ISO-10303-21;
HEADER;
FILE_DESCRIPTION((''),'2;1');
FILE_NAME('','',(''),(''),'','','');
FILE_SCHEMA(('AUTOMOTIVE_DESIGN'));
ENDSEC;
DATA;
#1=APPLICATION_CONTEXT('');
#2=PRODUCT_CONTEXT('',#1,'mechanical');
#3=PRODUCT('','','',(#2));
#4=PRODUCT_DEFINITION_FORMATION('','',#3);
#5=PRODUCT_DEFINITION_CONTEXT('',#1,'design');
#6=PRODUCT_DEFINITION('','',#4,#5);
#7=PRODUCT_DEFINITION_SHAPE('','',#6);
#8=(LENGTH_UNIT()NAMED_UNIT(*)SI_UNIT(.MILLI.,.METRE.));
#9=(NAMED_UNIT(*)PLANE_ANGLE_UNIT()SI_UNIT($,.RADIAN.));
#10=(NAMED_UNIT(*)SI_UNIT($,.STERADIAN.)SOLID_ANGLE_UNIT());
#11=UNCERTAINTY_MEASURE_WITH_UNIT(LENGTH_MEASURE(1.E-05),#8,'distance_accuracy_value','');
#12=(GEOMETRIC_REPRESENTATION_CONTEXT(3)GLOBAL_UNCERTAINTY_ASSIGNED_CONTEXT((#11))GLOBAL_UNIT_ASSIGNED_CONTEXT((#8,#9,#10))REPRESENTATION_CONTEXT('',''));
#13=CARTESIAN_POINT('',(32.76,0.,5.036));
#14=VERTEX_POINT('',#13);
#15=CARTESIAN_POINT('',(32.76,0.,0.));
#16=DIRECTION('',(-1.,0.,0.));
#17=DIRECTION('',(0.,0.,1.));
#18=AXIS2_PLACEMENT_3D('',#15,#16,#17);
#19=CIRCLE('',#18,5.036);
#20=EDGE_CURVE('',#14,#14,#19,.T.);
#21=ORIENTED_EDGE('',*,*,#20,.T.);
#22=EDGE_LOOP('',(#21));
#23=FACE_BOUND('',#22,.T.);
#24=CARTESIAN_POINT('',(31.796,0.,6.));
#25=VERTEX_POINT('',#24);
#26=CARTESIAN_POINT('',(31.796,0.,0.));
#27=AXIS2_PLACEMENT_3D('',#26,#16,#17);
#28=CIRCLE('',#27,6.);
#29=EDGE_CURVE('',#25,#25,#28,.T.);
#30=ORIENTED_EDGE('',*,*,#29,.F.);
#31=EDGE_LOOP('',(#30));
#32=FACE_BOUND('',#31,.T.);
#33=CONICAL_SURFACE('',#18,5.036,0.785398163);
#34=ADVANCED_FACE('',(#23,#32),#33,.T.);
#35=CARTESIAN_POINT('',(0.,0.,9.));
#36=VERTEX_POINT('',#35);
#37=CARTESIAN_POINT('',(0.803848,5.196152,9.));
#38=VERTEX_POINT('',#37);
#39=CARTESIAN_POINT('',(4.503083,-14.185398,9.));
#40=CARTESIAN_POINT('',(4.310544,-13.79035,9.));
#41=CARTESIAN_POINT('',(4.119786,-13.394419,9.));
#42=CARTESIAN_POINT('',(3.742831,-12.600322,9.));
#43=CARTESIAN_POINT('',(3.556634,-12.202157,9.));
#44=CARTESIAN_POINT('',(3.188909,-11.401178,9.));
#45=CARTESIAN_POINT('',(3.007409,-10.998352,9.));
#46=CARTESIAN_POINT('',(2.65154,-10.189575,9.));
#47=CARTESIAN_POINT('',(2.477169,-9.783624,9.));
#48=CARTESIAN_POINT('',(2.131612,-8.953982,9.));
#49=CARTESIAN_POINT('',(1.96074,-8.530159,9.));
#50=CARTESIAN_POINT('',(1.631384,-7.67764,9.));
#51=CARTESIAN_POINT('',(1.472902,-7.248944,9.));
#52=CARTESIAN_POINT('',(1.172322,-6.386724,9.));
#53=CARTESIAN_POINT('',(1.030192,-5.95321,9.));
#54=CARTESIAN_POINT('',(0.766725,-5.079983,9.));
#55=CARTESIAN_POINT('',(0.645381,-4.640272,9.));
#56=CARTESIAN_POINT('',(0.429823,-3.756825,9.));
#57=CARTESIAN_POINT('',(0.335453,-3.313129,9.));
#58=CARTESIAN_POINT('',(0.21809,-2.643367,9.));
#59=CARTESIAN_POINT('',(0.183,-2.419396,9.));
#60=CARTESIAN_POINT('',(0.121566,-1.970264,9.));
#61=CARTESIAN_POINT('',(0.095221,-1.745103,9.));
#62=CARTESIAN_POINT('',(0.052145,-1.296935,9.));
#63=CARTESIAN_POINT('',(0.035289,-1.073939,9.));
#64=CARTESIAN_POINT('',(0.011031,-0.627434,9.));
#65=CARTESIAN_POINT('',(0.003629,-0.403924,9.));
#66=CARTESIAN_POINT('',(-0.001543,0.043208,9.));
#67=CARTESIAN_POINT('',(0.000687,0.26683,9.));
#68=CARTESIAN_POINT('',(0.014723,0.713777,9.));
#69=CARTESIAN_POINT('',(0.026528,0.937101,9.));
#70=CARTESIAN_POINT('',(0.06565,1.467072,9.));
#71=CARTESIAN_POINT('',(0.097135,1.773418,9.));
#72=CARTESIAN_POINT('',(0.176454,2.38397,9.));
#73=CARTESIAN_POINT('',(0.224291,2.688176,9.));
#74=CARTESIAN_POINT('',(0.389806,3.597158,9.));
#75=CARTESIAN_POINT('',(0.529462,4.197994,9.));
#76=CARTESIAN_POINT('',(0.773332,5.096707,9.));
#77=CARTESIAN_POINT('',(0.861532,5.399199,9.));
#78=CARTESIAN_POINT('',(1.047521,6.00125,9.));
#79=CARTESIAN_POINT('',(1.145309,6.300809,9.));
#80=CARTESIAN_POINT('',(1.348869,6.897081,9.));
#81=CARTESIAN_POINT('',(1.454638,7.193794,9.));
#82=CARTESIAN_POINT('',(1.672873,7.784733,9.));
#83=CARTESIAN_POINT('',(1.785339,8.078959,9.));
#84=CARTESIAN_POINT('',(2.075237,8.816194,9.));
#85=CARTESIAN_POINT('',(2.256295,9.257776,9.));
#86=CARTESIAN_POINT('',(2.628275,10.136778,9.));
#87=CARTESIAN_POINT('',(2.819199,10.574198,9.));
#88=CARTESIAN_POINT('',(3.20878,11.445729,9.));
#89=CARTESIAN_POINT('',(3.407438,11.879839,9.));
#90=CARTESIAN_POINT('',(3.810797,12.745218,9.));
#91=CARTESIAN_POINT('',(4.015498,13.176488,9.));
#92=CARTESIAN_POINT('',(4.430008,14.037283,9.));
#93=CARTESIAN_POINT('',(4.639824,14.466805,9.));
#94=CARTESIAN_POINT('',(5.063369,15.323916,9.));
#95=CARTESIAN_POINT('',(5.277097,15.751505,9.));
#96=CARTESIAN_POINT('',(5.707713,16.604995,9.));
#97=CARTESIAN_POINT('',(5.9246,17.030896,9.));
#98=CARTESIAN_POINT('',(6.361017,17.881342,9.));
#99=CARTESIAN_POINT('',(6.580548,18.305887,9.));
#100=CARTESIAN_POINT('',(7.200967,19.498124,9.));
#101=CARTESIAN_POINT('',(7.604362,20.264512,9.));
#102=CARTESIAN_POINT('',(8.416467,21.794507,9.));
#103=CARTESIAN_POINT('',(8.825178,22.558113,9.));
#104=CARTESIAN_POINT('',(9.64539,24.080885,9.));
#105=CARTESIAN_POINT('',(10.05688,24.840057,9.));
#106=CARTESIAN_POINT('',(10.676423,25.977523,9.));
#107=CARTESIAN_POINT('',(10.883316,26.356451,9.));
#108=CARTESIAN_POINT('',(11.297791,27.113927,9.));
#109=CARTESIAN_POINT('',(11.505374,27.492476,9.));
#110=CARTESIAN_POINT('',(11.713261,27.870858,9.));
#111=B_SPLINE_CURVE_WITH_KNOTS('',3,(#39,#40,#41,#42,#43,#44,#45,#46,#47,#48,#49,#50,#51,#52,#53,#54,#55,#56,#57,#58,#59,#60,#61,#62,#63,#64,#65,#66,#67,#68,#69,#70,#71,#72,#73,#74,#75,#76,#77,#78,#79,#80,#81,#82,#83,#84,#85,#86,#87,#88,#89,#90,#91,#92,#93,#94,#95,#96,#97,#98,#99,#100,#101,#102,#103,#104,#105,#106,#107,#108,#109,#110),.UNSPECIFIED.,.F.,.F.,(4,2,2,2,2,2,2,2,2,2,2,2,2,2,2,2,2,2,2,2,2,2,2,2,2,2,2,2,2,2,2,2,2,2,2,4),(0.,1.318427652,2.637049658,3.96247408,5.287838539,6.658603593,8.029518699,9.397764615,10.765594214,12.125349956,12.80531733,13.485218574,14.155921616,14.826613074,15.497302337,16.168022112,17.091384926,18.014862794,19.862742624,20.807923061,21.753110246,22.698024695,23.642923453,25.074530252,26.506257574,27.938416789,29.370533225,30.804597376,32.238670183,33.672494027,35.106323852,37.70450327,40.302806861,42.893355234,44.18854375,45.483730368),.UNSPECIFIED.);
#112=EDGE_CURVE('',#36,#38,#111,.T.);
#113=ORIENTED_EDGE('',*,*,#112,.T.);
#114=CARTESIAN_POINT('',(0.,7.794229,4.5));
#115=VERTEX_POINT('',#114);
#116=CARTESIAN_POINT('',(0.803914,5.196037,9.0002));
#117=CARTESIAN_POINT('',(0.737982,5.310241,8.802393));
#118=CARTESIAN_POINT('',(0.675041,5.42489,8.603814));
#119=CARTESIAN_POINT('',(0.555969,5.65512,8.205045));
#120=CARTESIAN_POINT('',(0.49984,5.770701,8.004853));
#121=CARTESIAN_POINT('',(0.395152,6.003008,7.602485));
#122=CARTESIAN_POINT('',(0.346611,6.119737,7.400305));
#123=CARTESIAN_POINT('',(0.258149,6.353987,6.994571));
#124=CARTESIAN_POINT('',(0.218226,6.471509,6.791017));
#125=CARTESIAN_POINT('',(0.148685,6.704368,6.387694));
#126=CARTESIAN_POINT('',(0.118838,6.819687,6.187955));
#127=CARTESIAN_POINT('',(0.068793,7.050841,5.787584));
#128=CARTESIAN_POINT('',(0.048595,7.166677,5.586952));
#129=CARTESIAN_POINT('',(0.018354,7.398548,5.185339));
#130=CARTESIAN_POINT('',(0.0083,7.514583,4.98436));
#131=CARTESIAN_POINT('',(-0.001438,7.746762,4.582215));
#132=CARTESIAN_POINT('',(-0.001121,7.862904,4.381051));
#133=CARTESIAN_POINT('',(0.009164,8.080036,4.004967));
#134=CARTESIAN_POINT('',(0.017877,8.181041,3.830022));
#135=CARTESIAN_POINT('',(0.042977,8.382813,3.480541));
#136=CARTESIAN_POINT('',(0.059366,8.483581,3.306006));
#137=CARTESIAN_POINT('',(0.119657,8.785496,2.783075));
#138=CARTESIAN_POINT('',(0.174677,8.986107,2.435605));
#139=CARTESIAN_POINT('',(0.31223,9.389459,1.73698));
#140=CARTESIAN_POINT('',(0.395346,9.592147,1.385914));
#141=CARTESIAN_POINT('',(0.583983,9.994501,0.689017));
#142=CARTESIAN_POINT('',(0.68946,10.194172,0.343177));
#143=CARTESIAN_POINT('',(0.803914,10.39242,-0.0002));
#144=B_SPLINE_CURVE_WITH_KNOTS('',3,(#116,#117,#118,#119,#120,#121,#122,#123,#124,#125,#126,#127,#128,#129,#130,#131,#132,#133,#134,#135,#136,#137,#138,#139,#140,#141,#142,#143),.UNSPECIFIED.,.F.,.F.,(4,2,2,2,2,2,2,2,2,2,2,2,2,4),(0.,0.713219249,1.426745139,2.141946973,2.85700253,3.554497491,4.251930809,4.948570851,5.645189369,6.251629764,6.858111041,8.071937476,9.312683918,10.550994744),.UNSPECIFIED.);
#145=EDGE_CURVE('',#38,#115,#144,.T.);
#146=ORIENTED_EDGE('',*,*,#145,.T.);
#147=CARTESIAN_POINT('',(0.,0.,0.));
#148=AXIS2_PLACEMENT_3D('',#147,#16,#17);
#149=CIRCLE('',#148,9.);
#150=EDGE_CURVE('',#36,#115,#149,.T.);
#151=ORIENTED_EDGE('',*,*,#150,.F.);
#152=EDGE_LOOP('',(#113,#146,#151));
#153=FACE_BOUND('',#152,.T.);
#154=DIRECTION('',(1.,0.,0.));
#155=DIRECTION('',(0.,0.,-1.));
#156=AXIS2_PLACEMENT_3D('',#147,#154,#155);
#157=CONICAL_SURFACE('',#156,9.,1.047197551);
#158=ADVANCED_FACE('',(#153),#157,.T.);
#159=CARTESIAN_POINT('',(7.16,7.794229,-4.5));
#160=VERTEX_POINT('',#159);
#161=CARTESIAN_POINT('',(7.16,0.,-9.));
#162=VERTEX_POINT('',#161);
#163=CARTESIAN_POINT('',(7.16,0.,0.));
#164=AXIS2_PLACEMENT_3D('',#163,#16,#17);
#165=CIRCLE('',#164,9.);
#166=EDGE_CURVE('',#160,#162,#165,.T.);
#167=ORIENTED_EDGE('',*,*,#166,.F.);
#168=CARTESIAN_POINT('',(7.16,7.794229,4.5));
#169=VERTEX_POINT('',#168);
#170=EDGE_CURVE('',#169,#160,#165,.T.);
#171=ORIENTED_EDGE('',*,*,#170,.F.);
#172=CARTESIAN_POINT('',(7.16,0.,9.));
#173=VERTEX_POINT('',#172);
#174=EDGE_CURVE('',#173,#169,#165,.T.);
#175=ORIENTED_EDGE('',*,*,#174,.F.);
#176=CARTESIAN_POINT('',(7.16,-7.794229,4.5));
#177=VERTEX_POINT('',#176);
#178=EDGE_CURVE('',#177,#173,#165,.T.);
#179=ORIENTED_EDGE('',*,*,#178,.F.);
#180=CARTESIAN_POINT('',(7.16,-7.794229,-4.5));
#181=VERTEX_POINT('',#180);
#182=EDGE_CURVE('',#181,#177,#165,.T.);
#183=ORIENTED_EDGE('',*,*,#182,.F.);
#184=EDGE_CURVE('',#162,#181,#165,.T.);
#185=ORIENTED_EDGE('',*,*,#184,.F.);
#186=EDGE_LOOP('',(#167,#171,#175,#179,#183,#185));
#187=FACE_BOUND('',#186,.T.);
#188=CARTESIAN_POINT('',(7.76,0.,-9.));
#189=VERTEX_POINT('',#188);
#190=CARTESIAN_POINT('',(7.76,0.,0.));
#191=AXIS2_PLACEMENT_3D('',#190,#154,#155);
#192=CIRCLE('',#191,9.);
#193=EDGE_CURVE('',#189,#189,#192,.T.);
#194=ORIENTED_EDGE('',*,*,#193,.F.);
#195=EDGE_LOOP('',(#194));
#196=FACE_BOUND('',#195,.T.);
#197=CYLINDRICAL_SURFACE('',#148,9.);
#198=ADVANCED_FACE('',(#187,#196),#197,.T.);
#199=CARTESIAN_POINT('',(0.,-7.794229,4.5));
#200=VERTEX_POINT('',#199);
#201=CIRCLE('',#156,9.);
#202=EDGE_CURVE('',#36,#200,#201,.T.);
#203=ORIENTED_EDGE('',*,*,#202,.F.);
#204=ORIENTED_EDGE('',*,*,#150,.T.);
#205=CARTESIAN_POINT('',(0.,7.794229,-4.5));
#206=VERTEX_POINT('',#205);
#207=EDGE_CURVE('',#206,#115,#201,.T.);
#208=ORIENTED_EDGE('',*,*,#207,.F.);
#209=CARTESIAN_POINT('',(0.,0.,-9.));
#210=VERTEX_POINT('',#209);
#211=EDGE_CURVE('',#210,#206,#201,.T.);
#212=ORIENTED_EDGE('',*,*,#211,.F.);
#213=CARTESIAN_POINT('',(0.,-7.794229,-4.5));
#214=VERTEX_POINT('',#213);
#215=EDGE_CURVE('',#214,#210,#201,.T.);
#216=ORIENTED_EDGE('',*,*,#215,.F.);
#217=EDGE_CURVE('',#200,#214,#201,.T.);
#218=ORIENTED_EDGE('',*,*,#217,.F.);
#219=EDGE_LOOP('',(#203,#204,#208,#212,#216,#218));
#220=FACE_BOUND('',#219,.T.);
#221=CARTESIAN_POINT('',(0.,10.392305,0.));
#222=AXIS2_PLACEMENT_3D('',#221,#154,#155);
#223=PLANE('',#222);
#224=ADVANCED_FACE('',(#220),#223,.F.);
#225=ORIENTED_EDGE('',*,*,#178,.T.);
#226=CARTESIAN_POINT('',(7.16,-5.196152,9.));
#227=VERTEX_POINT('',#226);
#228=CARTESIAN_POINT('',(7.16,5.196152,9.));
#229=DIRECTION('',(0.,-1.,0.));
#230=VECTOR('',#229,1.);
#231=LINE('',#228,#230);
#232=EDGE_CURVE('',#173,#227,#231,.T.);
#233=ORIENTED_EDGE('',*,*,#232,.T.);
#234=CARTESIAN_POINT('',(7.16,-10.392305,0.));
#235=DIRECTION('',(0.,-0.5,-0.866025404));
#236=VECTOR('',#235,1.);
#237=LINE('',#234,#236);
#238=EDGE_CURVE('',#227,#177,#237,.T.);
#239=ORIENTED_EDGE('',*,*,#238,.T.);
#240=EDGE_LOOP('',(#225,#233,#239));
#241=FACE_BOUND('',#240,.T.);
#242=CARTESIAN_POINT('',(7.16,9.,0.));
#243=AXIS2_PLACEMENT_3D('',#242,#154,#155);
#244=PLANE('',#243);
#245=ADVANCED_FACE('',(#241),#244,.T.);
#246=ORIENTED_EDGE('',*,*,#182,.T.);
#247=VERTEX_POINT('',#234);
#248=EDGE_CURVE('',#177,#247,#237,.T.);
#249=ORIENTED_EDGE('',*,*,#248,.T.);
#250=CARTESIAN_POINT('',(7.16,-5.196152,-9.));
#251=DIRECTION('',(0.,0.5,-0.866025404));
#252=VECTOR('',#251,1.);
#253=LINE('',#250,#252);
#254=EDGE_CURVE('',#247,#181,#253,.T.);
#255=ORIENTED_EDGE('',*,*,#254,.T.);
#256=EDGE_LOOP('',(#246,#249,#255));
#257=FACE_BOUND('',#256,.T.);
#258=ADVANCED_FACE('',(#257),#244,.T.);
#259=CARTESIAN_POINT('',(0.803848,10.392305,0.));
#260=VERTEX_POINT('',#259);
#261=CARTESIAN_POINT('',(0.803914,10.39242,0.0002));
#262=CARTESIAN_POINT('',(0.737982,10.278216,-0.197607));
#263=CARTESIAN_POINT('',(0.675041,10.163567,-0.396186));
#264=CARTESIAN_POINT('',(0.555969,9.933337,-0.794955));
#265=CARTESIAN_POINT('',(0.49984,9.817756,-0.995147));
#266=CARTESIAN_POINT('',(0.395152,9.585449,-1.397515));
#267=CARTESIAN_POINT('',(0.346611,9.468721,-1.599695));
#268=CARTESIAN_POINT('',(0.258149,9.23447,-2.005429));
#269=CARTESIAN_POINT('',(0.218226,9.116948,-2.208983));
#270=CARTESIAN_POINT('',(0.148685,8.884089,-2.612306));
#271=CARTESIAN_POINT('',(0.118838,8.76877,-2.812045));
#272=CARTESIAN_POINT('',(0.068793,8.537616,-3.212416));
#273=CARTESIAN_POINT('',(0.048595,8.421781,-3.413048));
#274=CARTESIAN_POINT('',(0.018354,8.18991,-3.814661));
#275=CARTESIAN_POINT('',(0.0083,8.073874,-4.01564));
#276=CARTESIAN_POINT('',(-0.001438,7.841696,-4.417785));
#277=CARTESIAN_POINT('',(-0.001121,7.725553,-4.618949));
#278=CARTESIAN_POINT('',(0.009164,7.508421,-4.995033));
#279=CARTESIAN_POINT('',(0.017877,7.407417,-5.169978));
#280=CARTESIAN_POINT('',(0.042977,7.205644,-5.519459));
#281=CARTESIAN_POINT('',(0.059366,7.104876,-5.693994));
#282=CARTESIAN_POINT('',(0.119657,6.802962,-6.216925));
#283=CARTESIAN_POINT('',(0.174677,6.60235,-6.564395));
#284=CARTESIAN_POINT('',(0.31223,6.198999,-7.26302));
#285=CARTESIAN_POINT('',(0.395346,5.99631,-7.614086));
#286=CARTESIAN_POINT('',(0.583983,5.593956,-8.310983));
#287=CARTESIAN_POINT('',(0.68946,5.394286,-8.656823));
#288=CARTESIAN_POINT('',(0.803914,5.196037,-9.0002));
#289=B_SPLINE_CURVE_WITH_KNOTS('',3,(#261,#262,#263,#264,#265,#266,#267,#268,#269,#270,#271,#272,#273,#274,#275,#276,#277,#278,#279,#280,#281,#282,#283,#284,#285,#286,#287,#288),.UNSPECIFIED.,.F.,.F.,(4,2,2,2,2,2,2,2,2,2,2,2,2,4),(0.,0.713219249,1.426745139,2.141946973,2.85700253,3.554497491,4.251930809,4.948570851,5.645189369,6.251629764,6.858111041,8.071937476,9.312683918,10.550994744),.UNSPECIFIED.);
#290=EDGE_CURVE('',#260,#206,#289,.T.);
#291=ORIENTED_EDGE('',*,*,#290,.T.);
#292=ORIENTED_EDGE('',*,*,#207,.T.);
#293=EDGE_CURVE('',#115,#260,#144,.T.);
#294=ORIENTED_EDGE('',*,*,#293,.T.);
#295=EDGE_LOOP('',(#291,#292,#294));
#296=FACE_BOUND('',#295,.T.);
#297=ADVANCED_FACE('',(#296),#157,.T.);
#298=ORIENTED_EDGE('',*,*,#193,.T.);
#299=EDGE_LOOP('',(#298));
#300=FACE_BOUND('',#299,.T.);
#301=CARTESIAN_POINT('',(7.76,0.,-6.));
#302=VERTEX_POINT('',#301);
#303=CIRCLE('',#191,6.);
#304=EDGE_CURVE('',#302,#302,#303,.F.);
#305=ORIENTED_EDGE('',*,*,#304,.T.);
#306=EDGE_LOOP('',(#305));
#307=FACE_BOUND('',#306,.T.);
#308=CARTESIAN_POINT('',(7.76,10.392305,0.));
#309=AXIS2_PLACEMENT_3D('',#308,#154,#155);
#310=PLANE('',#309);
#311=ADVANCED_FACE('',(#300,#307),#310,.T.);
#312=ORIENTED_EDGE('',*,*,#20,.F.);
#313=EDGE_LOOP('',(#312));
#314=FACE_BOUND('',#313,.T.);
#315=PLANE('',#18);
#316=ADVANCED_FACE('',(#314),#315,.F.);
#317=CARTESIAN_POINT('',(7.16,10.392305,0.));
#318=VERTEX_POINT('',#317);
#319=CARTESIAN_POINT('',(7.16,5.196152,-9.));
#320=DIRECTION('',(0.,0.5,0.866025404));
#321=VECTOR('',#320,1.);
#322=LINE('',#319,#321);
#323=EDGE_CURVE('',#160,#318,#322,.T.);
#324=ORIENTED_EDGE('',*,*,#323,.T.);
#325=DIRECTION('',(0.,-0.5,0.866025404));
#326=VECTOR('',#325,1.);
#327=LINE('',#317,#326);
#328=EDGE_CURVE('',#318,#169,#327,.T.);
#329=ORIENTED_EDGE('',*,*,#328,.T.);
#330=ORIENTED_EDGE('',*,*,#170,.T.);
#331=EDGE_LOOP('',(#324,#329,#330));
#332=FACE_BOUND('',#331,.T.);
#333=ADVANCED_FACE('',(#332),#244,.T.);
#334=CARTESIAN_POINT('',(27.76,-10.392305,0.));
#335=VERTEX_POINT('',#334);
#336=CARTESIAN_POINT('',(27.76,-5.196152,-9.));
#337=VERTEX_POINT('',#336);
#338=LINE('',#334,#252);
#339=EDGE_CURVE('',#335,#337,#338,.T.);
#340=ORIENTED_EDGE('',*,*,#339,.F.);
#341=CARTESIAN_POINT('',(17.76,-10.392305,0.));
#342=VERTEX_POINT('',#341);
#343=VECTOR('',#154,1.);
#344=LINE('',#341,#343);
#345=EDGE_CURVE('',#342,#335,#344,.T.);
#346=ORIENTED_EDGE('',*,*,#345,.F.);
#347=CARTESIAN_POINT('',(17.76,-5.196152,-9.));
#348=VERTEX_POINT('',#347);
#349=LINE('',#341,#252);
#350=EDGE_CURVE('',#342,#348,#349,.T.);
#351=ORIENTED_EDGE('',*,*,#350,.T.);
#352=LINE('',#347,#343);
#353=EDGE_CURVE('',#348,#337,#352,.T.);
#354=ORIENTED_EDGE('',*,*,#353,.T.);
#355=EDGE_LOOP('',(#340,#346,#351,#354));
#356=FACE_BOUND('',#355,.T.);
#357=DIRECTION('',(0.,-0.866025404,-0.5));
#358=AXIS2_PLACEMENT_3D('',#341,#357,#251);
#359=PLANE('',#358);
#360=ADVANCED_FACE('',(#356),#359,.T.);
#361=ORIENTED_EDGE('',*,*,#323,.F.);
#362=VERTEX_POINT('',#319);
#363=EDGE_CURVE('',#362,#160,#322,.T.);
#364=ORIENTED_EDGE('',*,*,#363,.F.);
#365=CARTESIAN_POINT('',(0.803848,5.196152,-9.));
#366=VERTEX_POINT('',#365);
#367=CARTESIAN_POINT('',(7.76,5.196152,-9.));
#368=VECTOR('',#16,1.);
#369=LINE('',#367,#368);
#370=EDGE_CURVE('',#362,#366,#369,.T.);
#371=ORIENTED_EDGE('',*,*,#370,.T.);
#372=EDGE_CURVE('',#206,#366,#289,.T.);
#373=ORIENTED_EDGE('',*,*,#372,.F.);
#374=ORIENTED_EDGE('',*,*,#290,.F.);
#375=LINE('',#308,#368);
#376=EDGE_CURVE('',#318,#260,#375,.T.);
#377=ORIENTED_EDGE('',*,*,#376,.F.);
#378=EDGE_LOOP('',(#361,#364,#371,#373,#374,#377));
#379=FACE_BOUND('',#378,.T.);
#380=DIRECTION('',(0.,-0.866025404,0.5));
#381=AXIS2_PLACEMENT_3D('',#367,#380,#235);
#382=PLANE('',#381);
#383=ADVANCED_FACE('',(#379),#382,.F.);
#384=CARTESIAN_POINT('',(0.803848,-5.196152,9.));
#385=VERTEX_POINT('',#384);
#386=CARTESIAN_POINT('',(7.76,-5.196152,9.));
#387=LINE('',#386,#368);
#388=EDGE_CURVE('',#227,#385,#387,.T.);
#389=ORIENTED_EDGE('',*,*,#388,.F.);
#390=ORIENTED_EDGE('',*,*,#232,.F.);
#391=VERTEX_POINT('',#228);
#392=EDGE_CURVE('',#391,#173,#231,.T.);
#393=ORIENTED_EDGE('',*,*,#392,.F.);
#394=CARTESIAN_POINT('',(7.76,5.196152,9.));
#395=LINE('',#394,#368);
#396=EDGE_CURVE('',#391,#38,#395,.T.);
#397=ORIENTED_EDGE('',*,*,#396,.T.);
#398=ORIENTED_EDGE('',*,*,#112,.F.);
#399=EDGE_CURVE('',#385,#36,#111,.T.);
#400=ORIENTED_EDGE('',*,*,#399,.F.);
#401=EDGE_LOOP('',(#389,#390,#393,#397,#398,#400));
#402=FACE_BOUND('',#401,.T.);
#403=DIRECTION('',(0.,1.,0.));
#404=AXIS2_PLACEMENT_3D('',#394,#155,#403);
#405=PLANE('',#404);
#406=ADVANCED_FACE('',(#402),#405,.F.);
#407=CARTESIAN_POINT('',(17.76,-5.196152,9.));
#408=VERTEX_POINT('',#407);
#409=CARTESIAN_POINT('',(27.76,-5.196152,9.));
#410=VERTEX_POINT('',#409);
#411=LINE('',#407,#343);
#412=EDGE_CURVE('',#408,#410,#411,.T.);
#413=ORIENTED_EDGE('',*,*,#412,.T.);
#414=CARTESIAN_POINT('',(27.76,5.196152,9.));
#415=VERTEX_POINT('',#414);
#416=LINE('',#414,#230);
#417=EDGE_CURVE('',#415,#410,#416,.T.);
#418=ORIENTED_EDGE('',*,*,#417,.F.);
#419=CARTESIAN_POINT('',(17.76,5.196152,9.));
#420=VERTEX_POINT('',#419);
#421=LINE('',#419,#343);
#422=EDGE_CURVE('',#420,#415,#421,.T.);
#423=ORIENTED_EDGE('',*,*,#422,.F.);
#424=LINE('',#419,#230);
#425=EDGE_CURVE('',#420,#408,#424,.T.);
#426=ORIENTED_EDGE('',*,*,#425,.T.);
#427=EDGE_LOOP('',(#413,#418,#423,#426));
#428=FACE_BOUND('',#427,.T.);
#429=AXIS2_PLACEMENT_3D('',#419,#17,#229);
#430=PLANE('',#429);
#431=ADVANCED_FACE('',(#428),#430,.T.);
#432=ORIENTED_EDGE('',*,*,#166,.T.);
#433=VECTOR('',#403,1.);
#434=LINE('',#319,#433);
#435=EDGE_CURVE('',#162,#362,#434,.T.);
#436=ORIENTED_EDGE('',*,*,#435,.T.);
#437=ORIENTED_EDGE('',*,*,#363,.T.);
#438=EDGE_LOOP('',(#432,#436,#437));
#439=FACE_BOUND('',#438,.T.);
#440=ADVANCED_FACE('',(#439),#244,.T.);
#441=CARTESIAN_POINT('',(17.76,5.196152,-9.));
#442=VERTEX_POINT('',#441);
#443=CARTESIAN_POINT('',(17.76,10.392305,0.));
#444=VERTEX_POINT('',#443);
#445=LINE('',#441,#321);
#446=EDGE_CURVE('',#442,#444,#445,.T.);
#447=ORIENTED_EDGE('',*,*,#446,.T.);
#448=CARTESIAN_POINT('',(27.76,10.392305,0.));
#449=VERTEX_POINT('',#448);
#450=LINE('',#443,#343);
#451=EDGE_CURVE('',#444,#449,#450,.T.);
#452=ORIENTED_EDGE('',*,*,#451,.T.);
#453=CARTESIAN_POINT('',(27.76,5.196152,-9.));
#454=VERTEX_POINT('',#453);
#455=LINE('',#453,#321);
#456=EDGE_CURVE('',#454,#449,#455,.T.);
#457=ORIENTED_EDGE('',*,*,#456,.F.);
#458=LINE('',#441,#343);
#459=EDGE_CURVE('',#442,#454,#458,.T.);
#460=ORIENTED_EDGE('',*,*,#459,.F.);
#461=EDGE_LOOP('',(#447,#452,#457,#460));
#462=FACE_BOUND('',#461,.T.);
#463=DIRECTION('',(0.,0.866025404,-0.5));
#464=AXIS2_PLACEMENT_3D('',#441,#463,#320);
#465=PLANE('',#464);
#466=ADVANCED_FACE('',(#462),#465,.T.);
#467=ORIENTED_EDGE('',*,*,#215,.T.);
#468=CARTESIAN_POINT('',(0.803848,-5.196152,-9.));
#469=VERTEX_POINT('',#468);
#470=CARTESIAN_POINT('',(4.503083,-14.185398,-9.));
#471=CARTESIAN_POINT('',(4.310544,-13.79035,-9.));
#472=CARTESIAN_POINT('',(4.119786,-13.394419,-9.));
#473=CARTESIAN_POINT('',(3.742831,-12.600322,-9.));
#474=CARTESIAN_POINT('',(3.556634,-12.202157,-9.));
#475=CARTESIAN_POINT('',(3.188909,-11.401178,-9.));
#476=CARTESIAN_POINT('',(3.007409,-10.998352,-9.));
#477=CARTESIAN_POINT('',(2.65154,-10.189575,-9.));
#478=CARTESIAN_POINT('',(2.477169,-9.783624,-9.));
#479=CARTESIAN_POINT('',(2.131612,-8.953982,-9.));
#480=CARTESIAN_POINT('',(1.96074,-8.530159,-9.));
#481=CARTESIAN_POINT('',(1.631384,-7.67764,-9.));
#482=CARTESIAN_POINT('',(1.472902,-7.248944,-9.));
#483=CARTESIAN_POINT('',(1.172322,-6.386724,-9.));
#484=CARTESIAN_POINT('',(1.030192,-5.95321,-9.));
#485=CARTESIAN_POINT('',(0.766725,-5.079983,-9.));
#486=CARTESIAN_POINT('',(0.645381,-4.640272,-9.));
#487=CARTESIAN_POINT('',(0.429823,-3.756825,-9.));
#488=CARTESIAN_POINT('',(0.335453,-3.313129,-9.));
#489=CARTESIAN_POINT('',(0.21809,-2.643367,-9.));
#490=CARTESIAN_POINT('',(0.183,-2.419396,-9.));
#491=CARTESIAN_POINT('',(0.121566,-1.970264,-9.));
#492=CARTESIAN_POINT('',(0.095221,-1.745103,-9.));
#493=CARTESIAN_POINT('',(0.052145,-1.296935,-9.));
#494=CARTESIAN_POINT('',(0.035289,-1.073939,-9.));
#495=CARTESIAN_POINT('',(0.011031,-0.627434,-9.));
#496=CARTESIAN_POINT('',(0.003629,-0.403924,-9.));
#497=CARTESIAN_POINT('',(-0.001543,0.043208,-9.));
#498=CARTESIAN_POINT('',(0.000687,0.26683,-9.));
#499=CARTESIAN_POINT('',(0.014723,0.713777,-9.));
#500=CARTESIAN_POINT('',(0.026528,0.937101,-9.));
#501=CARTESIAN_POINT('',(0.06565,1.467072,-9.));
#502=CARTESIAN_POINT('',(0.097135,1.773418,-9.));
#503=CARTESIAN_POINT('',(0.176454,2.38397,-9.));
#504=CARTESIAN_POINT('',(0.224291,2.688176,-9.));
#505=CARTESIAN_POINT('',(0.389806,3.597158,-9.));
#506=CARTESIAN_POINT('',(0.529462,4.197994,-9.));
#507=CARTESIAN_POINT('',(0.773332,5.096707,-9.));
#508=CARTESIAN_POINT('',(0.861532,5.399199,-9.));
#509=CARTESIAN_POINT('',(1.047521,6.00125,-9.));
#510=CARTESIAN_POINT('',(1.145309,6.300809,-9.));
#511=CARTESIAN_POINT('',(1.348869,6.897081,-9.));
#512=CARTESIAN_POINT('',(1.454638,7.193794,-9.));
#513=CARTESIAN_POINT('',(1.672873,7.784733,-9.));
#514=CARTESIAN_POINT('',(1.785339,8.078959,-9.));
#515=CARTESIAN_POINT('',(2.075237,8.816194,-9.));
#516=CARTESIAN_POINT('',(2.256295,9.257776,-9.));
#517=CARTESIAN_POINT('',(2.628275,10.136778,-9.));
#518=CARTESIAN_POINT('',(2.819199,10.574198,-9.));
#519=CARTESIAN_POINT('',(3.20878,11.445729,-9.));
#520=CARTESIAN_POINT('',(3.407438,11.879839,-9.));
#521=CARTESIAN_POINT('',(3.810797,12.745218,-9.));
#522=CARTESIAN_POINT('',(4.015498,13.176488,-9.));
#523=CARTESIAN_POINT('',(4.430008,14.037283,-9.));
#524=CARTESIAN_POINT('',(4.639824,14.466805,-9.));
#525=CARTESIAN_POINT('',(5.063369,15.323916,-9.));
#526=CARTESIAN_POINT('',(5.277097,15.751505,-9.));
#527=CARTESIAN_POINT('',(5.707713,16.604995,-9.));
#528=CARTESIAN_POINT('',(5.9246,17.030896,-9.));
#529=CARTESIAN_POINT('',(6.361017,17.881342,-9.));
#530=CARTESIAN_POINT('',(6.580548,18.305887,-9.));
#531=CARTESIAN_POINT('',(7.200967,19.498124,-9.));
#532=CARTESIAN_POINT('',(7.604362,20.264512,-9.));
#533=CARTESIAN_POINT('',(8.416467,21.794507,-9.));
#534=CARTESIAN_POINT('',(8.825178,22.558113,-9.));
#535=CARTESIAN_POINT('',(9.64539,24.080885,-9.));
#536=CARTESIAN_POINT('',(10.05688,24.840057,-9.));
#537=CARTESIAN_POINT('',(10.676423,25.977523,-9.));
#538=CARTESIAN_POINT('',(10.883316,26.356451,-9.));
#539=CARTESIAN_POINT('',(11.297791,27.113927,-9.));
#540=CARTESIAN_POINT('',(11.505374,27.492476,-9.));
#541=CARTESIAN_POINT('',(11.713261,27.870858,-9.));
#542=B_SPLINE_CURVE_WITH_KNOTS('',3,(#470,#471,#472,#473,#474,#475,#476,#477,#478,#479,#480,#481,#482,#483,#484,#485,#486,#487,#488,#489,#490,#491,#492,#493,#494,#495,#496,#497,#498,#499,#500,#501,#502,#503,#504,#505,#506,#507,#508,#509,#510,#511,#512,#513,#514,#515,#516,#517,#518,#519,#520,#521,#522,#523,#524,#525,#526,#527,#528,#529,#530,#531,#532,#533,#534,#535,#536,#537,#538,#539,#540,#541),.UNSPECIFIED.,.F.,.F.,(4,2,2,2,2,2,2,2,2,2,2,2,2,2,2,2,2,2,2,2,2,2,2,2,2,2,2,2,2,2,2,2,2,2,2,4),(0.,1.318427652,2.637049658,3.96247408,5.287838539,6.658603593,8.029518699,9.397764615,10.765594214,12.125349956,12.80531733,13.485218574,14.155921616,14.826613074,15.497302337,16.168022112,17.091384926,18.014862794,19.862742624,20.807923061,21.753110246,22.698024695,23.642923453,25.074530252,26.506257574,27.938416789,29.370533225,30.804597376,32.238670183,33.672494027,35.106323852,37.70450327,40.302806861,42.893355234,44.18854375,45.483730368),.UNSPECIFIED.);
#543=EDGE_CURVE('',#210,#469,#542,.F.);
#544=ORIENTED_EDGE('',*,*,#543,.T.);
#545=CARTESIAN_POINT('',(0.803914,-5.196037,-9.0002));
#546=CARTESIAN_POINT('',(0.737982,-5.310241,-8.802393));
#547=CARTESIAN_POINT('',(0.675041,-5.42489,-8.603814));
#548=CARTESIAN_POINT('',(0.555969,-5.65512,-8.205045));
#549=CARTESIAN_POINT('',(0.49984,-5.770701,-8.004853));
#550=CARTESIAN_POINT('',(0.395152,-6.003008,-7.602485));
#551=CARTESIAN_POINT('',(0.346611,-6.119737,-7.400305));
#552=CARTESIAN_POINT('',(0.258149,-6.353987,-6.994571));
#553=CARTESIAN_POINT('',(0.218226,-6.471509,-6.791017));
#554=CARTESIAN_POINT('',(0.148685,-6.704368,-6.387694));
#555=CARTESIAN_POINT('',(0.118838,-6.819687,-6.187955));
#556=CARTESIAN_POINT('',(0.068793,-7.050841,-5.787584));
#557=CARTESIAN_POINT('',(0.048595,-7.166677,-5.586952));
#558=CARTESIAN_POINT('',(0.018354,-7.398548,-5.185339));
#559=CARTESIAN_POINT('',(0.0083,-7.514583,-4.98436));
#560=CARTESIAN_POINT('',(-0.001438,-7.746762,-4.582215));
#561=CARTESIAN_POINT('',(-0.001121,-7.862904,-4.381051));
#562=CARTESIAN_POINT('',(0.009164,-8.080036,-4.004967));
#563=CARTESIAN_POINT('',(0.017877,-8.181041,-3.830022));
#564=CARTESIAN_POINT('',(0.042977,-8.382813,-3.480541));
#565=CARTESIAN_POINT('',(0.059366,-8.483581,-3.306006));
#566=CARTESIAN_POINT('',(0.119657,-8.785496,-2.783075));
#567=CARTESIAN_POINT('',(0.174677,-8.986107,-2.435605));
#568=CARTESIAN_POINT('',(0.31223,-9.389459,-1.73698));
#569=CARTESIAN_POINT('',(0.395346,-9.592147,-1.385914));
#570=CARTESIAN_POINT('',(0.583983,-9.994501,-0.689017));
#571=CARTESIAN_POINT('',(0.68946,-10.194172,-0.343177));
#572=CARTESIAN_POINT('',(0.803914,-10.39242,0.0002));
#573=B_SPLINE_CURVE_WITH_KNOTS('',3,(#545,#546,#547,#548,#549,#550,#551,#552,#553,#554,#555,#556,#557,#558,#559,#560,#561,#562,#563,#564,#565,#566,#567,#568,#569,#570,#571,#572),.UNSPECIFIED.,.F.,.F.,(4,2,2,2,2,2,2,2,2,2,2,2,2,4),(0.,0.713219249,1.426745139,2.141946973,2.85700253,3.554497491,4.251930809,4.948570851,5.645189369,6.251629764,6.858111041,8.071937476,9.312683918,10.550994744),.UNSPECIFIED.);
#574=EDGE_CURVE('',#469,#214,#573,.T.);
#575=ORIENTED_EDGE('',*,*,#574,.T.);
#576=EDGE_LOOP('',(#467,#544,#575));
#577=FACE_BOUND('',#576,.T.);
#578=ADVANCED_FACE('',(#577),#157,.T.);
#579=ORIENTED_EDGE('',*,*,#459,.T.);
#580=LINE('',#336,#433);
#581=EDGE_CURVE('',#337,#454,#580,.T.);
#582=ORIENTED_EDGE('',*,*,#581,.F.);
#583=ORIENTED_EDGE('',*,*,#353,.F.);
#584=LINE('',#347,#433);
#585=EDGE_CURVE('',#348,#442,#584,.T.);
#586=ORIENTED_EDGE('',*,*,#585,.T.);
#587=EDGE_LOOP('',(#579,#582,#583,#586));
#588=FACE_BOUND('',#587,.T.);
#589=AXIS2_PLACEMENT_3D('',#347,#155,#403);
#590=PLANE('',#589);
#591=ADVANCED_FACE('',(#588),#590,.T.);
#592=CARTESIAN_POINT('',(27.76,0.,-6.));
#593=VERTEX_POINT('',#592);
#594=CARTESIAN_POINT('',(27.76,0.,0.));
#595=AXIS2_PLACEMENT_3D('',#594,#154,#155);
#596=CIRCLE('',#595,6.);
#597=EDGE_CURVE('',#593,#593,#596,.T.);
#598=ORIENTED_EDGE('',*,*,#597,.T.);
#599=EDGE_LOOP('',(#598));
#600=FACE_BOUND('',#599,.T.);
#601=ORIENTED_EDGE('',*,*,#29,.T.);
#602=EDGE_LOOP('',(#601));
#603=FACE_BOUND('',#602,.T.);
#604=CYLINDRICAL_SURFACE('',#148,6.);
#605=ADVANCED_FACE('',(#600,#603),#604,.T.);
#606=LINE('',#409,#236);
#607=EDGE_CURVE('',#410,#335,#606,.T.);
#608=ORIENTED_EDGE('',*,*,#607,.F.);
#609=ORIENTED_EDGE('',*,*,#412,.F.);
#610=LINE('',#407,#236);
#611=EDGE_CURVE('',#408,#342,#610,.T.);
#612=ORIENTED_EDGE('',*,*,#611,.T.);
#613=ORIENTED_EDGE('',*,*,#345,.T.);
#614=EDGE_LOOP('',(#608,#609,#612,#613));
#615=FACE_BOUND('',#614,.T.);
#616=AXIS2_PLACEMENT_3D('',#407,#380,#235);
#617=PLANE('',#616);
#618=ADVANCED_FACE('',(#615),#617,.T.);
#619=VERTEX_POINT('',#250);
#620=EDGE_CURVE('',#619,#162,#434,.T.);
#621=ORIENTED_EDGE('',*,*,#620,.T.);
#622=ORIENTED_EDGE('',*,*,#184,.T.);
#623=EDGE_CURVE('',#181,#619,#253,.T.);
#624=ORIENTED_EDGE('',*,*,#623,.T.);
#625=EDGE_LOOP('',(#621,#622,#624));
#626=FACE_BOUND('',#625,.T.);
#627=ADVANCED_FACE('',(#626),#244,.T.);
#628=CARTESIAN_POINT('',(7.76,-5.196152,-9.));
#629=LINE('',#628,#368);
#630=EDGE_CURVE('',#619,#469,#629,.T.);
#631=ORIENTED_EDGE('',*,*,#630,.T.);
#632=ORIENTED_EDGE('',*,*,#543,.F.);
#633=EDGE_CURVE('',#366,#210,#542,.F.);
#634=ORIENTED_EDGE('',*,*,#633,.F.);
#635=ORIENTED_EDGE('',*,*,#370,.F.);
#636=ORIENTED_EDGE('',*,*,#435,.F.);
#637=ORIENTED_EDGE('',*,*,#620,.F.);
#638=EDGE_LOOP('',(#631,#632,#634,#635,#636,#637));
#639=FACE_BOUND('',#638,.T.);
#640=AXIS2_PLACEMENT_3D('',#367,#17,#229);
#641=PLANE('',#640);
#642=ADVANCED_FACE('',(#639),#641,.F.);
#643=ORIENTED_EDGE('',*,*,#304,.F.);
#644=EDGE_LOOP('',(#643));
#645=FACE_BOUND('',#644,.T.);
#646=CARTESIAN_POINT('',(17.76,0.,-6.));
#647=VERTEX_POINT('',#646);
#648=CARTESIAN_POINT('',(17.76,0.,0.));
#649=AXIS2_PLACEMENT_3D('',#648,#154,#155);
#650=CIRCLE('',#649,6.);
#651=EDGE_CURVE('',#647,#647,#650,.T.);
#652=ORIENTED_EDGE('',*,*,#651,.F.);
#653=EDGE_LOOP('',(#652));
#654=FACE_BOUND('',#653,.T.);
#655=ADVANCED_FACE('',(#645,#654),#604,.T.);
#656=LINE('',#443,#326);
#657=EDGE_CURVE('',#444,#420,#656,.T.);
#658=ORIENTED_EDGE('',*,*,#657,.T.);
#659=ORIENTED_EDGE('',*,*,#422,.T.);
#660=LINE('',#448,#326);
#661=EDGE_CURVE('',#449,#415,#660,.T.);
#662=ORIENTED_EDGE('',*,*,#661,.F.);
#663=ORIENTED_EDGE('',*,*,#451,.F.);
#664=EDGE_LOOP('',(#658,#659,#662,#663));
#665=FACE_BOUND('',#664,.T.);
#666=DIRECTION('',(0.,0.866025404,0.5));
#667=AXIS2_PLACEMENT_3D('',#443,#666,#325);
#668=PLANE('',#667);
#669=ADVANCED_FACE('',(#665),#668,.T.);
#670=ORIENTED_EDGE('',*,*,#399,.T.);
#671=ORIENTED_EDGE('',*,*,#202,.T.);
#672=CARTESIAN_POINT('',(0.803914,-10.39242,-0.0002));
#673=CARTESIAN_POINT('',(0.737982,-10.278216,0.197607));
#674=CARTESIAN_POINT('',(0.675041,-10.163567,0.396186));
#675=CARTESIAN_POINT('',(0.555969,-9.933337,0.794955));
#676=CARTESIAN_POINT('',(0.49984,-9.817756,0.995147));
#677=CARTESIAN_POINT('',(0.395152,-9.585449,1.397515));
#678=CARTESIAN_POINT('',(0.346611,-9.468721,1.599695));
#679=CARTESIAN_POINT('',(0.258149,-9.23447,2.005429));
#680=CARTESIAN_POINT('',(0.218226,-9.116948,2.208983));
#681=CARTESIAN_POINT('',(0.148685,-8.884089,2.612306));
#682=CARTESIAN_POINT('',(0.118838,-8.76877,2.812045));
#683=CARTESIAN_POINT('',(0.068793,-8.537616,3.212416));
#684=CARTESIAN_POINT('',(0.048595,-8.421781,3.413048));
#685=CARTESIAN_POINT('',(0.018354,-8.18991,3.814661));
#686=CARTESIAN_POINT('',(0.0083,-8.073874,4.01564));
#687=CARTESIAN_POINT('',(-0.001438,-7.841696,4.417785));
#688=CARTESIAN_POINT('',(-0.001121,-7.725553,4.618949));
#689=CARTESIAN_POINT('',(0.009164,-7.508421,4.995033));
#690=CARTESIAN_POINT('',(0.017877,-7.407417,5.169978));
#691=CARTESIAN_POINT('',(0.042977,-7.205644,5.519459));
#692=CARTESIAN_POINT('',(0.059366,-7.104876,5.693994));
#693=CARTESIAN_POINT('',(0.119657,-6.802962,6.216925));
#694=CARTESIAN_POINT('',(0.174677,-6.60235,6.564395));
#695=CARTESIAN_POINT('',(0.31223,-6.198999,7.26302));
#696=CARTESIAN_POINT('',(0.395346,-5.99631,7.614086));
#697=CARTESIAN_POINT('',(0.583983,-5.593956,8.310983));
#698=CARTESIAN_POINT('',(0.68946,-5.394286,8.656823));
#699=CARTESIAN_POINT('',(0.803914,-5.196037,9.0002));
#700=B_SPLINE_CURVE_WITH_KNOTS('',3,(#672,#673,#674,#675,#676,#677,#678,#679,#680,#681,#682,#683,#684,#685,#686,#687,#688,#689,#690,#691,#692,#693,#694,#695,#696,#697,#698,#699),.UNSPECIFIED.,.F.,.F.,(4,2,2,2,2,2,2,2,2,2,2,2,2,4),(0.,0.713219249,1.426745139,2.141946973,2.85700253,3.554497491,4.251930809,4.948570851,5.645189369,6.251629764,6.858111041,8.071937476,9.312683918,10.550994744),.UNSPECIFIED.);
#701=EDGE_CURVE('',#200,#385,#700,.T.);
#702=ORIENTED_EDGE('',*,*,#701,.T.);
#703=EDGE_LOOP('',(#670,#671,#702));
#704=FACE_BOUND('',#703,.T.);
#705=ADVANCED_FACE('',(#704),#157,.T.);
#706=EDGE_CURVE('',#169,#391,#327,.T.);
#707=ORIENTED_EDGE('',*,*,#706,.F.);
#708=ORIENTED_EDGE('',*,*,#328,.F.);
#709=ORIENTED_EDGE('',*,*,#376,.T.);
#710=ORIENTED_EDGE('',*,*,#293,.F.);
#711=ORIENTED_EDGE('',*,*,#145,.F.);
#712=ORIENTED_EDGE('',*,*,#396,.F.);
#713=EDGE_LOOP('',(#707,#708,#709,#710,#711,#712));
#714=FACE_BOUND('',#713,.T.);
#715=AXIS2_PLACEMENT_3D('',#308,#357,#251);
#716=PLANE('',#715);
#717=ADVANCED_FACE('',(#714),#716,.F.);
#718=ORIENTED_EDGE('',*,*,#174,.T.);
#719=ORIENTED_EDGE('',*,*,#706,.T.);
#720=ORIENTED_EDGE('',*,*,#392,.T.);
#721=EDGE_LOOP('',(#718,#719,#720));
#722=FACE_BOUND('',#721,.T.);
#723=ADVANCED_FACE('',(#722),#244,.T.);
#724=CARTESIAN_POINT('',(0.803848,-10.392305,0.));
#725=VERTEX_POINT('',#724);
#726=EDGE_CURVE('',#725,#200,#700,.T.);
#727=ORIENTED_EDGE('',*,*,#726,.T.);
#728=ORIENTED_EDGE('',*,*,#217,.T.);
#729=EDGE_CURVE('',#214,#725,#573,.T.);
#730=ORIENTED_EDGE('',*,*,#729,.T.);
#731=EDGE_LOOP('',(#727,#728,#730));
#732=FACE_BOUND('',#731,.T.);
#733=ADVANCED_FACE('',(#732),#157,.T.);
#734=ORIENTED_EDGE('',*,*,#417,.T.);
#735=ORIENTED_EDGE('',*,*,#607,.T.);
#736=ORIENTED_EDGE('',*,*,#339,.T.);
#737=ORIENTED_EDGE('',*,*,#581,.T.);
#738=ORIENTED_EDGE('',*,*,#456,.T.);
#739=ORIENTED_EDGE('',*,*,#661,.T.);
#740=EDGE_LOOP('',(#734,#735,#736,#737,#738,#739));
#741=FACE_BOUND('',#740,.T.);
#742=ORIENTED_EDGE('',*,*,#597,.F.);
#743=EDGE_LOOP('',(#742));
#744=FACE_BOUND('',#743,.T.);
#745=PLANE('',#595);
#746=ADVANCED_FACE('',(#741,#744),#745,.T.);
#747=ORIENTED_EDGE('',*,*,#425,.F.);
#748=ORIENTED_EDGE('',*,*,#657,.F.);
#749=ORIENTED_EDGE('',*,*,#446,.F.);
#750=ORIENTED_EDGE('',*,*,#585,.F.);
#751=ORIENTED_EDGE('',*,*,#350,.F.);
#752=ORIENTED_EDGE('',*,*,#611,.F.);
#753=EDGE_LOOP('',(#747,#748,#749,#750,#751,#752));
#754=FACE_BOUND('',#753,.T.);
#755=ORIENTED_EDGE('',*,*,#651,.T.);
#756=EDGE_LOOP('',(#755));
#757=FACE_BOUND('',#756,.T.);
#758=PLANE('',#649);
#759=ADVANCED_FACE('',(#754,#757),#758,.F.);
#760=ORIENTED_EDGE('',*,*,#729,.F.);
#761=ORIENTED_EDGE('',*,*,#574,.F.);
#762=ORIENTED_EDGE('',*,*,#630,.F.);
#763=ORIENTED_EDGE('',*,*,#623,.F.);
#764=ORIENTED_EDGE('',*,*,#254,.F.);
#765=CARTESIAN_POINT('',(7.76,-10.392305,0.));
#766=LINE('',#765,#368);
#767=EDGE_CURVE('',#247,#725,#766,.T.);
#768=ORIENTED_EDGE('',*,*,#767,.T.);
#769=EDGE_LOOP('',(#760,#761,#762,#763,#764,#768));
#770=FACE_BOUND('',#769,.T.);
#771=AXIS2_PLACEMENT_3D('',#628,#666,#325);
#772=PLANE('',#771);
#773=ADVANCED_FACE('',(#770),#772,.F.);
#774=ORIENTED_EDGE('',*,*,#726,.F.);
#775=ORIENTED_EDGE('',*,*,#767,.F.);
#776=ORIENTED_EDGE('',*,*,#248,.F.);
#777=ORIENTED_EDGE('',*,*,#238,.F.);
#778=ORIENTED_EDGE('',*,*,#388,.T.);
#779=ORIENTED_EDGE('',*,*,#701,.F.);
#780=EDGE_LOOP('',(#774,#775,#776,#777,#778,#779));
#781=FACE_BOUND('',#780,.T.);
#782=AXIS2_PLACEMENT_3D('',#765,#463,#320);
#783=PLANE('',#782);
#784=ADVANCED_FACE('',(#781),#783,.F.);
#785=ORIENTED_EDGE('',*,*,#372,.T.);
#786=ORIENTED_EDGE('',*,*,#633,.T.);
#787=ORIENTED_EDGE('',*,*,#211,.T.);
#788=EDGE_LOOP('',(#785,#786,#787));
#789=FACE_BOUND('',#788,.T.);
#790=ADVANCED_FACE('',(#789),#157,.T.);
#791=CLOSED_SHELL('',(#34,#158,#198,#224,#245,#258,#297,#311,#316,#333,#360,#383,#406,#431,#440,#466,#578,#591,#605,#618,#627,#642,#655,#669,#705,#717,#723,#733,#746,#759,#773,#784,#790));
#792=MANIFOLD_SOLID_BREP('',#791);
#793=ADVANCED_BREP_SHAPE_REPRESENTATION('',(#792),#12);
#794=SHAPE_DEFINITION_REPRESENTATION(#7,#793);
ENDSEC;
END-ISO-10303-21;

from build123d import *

# Parameters (mm, degrees)
BASEHEAD_DEPTH      = 7.76
SKETCH4_W           = 0.6
SKETCH4_H           = 11.392304845
BOSS_EXTRUDE1_DEPTH = 10


# Read off the part's stored shape, not the designer's step: HeadChamfer
with BuildPart() as part:
    # Sketch1 → BaseHead (new body)
    with BuildSketch(Plane(origin=(0, 0, 0), x_dir=(0, 0, -1), z_dir=(1, 0, 0))):
        Polygon((9, 5.196152423), (9, -5.196152423), (0, -10.392304845), (-9, -5.196152423), (-9, 5.196152423), (0, 10.392304845), align=None)
    extrude(amount=BASEHEAD_DEPTH)

    # HeadChamfer outline → HeadChamfer (revolve, cut)
    with BuildSketch(Plane.YX):
        Polygon((10.392304847, 0.803847578), (9, 0), (10.392304847, 0), align=None)
    revolve(axis=Axis((0, 0, 0), (1, 0, 0)), mode=Mode.SUBTRACT)

    # HeadChamfer 2 outline → HeadChamfer 2 (revolve)
    with BuildSketch(Plane.YX):
        Polygon((6, 7.76), (6, 31.796), (5.036, 32.76), (0, 32.76), (0, 7.76), align=None)
    revolve(axis=Axis((0, 0, 0), (1, 0, 0)))

    # Sketch4 → BearingFace (revolve, cut)
    with BuildSketch(Plane.XY, mode=Mode.PRIVATE) as bearingface_sk:
        with Locations((7.46, 14.696152423)):
            Rectangle(SKETCH4_W, SKETCH4_H)
    revolve(bearingface_sk.sketch.rotate(Axis((0, 0, 0), (1, 0, 0)), 90), axis=Axis((0, 0, 0), (1, 0, 0)), mode=Mode.SUBTRACT)

    # Sketch5 → Boss-Extrude1 (add)
    with BuildSketch(Plane(origin=(27.76, 0, 0), x_dir=(0, 0, -1), z_dir=(1, 0, 0))):
        Polygon((0, 10.392304845), (-9, 5.196152423), (-9, -5.196152423), (0, -10.392304845), (9, -5.196152423), (9, 5.196152423), align=None)
    extrude(amount=-BOSS_EXTRUDE1_DEPTH)


solid = part.part
